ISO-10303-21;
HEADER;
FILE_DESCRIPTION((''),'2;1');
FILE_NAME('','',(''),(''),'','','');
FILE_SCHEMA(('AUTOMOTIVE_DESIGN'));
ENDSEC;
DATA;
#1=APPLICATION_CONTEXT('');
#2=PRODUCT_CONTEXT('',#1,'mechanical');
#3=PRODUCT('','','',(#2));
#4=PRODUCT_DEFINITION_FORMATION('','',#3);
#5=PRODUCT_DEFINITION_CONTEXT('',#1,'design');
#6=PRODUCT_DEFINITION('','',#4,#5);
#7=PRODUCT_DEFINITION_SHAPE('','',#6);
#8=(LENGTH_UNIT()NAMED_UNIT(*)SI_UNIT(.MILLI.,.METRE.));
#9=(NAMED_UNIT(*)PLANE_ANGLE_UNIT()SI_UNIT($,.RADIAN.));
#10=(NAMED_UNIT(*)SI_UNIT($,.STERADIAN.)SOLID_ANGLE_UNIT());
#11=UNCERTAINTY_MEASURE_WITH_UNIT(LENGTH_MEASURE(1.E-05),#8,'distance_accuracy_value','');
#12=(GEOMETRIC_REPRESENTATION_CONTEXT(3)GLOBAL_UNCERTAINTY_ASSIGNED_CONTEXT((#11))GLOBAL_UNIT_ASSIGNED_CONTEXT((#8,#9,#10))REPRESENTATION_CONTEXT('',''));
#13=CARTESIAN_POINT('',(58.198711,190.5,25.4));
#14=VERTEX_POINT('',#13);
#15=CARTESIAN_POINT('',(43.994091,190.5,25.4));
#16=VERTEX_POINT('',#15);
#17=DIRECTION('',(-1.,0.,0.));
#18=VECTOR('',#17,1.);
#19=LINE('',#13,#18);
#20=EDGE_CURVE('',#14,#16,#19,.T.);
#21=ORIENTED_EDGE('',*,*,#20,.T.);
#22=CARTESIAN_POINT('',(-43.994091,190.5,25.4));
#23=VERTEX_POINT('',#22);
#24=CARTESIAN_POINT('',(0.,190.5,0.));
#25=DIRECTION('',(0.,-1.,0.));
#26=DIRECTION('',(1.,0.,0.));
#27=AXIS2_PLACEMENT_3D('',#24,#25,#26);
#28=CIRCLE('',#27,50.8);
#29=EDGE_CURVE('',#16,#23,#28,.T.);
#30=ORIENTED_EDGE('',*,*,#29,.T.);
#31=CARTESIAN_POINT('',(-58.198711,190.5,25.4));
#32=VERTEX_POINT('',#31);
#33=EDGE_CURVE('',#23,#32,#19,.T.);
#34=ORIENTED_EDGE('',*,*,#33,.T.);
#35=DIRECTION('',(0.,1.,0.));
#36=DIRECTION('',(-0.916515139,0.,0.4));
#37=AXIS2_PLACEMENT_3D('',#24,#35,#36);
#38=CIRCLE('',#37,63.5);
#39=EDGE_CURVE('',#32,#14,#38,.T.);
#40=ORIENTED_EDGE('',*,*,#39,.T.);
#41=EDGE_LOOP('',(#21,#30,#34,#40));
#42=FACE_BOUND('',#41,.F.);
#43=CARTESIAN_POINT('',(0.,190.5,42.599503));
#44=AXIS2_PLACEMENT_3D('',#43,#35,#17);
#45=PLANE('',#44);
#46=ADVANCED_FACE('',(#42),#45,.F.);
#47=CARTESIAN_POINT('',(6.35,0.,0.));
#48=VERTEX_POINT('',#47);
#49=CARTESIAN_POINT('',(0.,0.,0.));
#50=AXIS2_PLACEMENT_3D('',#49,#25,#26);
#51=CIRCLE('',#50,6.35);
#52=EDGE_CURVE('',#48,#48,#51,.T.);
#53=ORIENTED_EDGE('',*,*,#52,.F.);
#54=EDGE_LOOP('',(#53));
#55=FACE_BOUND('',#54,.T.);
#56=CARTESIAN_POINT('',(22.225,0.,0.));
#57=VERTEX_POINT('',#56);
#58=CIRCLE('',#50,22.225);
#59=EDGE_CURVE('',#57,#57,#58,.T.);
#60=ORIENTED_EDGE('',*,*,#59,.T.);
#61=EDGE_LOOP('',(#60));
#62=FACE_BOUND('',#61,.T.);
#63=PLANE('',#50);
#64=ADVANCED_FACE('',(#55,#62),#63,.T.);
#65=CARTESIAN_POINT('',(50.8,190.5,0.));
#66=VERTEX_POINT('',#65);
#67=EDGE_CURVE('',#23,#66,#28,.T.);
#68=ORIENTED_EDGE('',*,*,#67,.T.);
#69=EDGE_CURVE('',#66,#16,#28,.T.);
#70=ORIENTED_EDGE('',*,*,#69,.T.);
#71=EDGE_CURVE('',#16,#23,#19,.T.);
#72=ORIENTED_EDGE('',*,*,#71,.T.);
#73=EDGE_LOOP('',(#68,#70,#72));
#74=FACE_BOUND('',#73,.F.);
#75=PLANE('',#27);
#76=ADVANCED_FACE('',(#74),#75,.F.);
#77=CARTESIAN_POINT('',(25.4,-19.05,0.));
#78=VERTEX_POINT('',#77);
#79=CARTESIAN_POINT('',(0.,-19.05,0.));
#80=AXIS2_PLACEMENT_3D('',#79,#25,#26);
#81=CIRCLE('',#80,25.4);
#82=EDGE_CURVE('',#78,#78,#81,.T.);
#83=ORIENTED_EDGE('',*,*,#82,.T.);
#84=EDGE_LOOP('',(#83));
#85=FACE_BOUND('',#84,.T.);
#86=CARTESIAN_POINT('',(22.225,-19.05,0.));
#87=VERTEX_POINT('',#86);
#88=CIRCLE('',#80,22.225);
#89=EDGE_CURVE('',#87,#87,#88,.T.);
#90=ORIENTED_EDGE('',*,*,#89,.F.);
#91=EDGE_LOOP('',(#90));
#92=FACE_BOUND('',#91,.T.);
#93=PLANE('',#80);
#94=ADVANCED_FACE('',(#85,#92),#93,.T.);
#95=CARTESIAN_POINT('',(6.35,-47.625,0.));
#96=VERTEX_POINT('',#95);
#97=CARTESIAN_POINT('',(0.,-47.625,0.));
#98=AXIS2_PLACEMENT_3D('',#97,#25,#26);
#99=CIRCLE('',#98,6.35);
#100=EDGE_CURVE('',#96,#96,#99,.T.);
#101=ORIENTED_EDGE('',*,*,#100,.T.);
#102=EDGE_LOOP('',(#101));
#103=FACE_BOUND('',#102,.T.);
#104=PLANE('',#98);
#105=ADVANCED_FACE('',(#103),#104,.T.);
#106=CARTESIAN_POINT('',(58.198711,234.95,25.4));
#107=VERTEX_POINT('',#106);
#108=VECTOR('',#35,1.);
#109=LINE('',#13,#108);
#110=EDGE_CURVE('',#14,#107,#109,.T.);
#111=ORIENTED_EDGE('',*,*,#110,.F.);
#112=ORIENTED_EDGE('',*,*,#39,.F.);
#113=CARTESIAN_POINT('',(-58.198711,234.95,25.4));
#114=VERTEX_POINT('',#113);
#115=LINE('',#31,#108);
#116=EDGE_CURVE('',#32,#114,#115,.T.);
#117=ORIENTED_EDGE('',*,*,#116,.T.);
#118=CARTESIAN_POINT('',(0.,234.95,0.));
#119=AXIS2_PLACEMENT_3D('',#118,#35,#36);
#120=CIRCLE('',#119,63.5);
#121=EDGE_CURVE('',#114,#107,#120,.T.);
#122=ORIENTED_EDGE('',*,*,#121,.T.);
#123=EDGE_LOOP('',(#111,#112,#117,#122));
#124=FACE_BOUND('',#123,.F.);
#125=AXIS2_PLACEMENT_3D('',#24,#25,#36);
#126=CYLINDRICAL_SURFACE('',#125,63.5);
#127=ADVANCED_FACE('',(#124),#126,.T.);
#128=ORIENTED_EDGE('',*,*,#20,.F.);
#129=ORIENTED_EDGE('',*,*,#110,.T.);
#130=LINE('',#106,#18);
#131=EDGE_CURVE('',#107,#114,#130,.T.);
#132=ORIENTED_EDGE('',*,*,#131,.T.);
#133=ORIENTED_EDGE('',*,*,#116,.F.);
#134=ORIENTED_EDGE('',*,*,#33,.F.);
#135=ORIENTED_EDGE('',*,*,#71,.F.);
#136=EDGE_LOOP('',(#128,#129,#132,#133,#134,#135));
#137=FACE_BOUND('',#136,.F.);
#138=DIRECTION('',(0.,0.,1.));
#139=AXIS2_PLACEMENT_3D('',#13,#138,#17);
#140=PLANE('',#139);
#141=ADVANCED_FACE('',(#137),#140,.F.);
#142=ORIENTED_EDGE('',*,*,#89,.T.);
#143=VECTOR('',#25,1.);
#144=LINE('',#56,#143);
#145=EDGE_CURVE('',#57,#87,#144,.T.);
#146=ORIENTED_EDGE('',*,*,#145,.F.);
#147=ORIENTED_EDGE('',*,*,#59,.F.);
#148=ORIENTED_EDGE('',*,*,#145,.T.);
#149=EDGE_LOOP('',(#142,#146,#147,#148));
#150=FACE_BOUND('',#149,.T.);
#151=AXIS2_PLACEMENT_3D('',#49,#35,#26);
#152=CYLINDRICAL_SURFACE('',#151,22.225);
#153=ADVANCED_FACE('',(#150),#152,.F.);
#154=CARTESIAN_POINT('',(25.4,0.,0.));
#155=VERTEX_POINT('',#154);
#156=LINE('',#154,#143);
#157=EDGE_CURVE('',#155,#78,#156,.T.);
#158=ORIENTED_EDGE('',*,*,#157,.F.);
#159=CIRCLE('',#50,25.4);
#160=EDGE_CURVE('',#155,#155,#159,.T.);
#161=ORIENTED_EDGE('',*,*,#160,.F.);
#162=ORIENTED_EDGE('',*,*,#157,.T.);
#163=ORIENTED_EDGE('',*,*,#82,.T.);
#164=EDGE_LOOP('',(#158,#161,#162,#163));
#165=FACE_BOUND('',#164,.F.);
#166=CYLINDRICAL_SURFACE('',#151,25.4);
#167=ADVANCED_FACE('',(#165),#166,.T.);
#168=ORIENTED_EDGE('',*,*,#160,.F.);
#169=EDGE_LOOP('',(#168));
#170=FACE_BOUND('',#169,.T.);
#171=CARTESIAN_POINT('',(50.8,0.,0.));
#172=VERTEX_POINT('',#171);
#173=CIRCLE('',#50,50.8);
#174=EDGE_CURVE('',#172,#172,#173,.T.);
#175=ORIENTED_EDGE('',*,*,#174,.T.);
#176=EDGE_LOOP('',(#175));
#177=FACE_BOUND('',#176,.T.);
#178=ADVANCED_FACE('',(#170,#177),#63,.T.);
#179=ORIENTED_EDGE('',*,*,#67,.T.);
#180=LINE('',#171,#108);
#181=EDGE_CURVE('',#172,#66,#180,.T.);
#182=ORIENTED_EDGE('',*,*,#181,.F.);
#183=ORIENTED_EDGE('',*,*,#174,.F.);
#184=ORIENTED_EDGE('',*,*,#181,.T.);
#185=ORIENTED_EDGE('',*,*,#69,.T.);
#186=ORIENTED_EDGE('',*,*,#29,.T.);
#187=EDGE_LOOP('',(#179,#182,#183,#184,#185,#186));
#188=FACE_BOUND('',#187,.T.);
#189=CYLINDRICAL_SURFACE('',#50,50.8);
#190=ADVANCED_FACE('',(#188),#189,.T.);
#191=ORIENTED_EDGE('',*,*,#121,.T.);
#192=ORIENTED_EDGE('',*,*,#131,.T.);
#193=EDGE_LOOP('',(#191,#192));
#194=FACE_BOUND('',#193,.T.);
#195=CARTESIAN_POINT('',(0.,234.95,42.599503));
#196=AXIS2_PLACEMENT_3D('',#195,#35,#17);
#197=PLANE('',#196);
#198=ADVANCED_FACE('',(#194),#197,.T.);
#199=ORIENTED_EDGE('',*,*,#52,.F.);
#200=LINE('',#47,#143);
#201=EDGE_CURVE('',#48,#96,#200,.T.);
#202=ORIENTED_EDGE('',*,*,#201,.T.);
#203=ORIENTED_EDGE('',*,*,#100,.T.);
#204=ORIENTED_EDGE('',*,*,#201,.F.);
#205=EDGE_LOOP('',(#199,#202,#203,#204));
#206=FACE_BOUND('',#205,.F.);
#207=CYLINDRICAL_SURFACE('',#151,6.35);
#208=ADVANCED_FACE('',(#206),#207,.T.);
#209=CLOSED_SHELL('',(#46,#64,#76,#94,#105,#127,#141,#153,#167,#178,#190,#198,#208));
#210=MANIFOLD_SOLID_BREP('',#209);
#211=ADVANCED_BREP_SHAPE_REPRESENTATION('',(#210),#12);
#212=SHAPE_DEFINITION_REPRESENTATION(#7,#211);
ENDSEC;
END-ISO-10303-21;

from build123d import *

# Parameters (mm, degrees)
F0_R     = 50.8
F1_DEPTH = 190.5
F2_R     = 6.35
F3_DEPTH = 47.625
F4_R     = 25.4
F4_R_2   = 22.225
F5_DEPTH = 19.05
F7_DEPTH = 44.45


# Not quite as in the source:
# - a feature names something its author has since deleted; it is built from what else it names


with BuildPart() as f1:
    # F0 (on Front) → F1 (new body)
    with BuildSketch(Plane.XZ):
        Circle(F0_R)
    extrude(amount=-F1_DEPTH)

    # F2 (on face) → F3 (join)
    with BuildSketch(Plane.XZ):
        Circle(F2_R)
    extrude(amount=F3_DEPTH)

    # F4 (on face) → F5 (join)
    with BuildSketch(Plane.XZ):
        Circle(F4_R)
        Circle(F4_R_2, mode=Mode.SUBTRACT)
    extrude(amount=F5_DEPTH)

    # F6 (on face) → F7 (join)
    with BuildSketch(Plane(origin=(0, 190.5, 0), x_dir=(-1, 0, 0), z_dir=(0, 1, 0))):
        with BuildLine():
            Line((43.9940905122, 25.4), (58.1987113259, 25.4))
            ThreePointArc((58.1987113259, 25.4), (0, 63.5), (-58.1987113259, 25.4))
            Line((-58.1987113259, 25.4), (-43.9940905122, 25.4))
            ThreePointArc((-43.9940905122, 25.4), (0, 50.8), (43.9940905122, 25.4))
        make_face()
        with BuildLine():
            Line((0, 25.4), (43.9940905122, 25.4))
            ThreePointArc((43.9940905122, 25.4), (0, 50.8), (-43.9940905122, 25.4))
            Line((-43.9940905122, 25.4), (0, 25.4))
        make_face()
    extrude(amount=F7_DEPTH)


solid = f1.part
